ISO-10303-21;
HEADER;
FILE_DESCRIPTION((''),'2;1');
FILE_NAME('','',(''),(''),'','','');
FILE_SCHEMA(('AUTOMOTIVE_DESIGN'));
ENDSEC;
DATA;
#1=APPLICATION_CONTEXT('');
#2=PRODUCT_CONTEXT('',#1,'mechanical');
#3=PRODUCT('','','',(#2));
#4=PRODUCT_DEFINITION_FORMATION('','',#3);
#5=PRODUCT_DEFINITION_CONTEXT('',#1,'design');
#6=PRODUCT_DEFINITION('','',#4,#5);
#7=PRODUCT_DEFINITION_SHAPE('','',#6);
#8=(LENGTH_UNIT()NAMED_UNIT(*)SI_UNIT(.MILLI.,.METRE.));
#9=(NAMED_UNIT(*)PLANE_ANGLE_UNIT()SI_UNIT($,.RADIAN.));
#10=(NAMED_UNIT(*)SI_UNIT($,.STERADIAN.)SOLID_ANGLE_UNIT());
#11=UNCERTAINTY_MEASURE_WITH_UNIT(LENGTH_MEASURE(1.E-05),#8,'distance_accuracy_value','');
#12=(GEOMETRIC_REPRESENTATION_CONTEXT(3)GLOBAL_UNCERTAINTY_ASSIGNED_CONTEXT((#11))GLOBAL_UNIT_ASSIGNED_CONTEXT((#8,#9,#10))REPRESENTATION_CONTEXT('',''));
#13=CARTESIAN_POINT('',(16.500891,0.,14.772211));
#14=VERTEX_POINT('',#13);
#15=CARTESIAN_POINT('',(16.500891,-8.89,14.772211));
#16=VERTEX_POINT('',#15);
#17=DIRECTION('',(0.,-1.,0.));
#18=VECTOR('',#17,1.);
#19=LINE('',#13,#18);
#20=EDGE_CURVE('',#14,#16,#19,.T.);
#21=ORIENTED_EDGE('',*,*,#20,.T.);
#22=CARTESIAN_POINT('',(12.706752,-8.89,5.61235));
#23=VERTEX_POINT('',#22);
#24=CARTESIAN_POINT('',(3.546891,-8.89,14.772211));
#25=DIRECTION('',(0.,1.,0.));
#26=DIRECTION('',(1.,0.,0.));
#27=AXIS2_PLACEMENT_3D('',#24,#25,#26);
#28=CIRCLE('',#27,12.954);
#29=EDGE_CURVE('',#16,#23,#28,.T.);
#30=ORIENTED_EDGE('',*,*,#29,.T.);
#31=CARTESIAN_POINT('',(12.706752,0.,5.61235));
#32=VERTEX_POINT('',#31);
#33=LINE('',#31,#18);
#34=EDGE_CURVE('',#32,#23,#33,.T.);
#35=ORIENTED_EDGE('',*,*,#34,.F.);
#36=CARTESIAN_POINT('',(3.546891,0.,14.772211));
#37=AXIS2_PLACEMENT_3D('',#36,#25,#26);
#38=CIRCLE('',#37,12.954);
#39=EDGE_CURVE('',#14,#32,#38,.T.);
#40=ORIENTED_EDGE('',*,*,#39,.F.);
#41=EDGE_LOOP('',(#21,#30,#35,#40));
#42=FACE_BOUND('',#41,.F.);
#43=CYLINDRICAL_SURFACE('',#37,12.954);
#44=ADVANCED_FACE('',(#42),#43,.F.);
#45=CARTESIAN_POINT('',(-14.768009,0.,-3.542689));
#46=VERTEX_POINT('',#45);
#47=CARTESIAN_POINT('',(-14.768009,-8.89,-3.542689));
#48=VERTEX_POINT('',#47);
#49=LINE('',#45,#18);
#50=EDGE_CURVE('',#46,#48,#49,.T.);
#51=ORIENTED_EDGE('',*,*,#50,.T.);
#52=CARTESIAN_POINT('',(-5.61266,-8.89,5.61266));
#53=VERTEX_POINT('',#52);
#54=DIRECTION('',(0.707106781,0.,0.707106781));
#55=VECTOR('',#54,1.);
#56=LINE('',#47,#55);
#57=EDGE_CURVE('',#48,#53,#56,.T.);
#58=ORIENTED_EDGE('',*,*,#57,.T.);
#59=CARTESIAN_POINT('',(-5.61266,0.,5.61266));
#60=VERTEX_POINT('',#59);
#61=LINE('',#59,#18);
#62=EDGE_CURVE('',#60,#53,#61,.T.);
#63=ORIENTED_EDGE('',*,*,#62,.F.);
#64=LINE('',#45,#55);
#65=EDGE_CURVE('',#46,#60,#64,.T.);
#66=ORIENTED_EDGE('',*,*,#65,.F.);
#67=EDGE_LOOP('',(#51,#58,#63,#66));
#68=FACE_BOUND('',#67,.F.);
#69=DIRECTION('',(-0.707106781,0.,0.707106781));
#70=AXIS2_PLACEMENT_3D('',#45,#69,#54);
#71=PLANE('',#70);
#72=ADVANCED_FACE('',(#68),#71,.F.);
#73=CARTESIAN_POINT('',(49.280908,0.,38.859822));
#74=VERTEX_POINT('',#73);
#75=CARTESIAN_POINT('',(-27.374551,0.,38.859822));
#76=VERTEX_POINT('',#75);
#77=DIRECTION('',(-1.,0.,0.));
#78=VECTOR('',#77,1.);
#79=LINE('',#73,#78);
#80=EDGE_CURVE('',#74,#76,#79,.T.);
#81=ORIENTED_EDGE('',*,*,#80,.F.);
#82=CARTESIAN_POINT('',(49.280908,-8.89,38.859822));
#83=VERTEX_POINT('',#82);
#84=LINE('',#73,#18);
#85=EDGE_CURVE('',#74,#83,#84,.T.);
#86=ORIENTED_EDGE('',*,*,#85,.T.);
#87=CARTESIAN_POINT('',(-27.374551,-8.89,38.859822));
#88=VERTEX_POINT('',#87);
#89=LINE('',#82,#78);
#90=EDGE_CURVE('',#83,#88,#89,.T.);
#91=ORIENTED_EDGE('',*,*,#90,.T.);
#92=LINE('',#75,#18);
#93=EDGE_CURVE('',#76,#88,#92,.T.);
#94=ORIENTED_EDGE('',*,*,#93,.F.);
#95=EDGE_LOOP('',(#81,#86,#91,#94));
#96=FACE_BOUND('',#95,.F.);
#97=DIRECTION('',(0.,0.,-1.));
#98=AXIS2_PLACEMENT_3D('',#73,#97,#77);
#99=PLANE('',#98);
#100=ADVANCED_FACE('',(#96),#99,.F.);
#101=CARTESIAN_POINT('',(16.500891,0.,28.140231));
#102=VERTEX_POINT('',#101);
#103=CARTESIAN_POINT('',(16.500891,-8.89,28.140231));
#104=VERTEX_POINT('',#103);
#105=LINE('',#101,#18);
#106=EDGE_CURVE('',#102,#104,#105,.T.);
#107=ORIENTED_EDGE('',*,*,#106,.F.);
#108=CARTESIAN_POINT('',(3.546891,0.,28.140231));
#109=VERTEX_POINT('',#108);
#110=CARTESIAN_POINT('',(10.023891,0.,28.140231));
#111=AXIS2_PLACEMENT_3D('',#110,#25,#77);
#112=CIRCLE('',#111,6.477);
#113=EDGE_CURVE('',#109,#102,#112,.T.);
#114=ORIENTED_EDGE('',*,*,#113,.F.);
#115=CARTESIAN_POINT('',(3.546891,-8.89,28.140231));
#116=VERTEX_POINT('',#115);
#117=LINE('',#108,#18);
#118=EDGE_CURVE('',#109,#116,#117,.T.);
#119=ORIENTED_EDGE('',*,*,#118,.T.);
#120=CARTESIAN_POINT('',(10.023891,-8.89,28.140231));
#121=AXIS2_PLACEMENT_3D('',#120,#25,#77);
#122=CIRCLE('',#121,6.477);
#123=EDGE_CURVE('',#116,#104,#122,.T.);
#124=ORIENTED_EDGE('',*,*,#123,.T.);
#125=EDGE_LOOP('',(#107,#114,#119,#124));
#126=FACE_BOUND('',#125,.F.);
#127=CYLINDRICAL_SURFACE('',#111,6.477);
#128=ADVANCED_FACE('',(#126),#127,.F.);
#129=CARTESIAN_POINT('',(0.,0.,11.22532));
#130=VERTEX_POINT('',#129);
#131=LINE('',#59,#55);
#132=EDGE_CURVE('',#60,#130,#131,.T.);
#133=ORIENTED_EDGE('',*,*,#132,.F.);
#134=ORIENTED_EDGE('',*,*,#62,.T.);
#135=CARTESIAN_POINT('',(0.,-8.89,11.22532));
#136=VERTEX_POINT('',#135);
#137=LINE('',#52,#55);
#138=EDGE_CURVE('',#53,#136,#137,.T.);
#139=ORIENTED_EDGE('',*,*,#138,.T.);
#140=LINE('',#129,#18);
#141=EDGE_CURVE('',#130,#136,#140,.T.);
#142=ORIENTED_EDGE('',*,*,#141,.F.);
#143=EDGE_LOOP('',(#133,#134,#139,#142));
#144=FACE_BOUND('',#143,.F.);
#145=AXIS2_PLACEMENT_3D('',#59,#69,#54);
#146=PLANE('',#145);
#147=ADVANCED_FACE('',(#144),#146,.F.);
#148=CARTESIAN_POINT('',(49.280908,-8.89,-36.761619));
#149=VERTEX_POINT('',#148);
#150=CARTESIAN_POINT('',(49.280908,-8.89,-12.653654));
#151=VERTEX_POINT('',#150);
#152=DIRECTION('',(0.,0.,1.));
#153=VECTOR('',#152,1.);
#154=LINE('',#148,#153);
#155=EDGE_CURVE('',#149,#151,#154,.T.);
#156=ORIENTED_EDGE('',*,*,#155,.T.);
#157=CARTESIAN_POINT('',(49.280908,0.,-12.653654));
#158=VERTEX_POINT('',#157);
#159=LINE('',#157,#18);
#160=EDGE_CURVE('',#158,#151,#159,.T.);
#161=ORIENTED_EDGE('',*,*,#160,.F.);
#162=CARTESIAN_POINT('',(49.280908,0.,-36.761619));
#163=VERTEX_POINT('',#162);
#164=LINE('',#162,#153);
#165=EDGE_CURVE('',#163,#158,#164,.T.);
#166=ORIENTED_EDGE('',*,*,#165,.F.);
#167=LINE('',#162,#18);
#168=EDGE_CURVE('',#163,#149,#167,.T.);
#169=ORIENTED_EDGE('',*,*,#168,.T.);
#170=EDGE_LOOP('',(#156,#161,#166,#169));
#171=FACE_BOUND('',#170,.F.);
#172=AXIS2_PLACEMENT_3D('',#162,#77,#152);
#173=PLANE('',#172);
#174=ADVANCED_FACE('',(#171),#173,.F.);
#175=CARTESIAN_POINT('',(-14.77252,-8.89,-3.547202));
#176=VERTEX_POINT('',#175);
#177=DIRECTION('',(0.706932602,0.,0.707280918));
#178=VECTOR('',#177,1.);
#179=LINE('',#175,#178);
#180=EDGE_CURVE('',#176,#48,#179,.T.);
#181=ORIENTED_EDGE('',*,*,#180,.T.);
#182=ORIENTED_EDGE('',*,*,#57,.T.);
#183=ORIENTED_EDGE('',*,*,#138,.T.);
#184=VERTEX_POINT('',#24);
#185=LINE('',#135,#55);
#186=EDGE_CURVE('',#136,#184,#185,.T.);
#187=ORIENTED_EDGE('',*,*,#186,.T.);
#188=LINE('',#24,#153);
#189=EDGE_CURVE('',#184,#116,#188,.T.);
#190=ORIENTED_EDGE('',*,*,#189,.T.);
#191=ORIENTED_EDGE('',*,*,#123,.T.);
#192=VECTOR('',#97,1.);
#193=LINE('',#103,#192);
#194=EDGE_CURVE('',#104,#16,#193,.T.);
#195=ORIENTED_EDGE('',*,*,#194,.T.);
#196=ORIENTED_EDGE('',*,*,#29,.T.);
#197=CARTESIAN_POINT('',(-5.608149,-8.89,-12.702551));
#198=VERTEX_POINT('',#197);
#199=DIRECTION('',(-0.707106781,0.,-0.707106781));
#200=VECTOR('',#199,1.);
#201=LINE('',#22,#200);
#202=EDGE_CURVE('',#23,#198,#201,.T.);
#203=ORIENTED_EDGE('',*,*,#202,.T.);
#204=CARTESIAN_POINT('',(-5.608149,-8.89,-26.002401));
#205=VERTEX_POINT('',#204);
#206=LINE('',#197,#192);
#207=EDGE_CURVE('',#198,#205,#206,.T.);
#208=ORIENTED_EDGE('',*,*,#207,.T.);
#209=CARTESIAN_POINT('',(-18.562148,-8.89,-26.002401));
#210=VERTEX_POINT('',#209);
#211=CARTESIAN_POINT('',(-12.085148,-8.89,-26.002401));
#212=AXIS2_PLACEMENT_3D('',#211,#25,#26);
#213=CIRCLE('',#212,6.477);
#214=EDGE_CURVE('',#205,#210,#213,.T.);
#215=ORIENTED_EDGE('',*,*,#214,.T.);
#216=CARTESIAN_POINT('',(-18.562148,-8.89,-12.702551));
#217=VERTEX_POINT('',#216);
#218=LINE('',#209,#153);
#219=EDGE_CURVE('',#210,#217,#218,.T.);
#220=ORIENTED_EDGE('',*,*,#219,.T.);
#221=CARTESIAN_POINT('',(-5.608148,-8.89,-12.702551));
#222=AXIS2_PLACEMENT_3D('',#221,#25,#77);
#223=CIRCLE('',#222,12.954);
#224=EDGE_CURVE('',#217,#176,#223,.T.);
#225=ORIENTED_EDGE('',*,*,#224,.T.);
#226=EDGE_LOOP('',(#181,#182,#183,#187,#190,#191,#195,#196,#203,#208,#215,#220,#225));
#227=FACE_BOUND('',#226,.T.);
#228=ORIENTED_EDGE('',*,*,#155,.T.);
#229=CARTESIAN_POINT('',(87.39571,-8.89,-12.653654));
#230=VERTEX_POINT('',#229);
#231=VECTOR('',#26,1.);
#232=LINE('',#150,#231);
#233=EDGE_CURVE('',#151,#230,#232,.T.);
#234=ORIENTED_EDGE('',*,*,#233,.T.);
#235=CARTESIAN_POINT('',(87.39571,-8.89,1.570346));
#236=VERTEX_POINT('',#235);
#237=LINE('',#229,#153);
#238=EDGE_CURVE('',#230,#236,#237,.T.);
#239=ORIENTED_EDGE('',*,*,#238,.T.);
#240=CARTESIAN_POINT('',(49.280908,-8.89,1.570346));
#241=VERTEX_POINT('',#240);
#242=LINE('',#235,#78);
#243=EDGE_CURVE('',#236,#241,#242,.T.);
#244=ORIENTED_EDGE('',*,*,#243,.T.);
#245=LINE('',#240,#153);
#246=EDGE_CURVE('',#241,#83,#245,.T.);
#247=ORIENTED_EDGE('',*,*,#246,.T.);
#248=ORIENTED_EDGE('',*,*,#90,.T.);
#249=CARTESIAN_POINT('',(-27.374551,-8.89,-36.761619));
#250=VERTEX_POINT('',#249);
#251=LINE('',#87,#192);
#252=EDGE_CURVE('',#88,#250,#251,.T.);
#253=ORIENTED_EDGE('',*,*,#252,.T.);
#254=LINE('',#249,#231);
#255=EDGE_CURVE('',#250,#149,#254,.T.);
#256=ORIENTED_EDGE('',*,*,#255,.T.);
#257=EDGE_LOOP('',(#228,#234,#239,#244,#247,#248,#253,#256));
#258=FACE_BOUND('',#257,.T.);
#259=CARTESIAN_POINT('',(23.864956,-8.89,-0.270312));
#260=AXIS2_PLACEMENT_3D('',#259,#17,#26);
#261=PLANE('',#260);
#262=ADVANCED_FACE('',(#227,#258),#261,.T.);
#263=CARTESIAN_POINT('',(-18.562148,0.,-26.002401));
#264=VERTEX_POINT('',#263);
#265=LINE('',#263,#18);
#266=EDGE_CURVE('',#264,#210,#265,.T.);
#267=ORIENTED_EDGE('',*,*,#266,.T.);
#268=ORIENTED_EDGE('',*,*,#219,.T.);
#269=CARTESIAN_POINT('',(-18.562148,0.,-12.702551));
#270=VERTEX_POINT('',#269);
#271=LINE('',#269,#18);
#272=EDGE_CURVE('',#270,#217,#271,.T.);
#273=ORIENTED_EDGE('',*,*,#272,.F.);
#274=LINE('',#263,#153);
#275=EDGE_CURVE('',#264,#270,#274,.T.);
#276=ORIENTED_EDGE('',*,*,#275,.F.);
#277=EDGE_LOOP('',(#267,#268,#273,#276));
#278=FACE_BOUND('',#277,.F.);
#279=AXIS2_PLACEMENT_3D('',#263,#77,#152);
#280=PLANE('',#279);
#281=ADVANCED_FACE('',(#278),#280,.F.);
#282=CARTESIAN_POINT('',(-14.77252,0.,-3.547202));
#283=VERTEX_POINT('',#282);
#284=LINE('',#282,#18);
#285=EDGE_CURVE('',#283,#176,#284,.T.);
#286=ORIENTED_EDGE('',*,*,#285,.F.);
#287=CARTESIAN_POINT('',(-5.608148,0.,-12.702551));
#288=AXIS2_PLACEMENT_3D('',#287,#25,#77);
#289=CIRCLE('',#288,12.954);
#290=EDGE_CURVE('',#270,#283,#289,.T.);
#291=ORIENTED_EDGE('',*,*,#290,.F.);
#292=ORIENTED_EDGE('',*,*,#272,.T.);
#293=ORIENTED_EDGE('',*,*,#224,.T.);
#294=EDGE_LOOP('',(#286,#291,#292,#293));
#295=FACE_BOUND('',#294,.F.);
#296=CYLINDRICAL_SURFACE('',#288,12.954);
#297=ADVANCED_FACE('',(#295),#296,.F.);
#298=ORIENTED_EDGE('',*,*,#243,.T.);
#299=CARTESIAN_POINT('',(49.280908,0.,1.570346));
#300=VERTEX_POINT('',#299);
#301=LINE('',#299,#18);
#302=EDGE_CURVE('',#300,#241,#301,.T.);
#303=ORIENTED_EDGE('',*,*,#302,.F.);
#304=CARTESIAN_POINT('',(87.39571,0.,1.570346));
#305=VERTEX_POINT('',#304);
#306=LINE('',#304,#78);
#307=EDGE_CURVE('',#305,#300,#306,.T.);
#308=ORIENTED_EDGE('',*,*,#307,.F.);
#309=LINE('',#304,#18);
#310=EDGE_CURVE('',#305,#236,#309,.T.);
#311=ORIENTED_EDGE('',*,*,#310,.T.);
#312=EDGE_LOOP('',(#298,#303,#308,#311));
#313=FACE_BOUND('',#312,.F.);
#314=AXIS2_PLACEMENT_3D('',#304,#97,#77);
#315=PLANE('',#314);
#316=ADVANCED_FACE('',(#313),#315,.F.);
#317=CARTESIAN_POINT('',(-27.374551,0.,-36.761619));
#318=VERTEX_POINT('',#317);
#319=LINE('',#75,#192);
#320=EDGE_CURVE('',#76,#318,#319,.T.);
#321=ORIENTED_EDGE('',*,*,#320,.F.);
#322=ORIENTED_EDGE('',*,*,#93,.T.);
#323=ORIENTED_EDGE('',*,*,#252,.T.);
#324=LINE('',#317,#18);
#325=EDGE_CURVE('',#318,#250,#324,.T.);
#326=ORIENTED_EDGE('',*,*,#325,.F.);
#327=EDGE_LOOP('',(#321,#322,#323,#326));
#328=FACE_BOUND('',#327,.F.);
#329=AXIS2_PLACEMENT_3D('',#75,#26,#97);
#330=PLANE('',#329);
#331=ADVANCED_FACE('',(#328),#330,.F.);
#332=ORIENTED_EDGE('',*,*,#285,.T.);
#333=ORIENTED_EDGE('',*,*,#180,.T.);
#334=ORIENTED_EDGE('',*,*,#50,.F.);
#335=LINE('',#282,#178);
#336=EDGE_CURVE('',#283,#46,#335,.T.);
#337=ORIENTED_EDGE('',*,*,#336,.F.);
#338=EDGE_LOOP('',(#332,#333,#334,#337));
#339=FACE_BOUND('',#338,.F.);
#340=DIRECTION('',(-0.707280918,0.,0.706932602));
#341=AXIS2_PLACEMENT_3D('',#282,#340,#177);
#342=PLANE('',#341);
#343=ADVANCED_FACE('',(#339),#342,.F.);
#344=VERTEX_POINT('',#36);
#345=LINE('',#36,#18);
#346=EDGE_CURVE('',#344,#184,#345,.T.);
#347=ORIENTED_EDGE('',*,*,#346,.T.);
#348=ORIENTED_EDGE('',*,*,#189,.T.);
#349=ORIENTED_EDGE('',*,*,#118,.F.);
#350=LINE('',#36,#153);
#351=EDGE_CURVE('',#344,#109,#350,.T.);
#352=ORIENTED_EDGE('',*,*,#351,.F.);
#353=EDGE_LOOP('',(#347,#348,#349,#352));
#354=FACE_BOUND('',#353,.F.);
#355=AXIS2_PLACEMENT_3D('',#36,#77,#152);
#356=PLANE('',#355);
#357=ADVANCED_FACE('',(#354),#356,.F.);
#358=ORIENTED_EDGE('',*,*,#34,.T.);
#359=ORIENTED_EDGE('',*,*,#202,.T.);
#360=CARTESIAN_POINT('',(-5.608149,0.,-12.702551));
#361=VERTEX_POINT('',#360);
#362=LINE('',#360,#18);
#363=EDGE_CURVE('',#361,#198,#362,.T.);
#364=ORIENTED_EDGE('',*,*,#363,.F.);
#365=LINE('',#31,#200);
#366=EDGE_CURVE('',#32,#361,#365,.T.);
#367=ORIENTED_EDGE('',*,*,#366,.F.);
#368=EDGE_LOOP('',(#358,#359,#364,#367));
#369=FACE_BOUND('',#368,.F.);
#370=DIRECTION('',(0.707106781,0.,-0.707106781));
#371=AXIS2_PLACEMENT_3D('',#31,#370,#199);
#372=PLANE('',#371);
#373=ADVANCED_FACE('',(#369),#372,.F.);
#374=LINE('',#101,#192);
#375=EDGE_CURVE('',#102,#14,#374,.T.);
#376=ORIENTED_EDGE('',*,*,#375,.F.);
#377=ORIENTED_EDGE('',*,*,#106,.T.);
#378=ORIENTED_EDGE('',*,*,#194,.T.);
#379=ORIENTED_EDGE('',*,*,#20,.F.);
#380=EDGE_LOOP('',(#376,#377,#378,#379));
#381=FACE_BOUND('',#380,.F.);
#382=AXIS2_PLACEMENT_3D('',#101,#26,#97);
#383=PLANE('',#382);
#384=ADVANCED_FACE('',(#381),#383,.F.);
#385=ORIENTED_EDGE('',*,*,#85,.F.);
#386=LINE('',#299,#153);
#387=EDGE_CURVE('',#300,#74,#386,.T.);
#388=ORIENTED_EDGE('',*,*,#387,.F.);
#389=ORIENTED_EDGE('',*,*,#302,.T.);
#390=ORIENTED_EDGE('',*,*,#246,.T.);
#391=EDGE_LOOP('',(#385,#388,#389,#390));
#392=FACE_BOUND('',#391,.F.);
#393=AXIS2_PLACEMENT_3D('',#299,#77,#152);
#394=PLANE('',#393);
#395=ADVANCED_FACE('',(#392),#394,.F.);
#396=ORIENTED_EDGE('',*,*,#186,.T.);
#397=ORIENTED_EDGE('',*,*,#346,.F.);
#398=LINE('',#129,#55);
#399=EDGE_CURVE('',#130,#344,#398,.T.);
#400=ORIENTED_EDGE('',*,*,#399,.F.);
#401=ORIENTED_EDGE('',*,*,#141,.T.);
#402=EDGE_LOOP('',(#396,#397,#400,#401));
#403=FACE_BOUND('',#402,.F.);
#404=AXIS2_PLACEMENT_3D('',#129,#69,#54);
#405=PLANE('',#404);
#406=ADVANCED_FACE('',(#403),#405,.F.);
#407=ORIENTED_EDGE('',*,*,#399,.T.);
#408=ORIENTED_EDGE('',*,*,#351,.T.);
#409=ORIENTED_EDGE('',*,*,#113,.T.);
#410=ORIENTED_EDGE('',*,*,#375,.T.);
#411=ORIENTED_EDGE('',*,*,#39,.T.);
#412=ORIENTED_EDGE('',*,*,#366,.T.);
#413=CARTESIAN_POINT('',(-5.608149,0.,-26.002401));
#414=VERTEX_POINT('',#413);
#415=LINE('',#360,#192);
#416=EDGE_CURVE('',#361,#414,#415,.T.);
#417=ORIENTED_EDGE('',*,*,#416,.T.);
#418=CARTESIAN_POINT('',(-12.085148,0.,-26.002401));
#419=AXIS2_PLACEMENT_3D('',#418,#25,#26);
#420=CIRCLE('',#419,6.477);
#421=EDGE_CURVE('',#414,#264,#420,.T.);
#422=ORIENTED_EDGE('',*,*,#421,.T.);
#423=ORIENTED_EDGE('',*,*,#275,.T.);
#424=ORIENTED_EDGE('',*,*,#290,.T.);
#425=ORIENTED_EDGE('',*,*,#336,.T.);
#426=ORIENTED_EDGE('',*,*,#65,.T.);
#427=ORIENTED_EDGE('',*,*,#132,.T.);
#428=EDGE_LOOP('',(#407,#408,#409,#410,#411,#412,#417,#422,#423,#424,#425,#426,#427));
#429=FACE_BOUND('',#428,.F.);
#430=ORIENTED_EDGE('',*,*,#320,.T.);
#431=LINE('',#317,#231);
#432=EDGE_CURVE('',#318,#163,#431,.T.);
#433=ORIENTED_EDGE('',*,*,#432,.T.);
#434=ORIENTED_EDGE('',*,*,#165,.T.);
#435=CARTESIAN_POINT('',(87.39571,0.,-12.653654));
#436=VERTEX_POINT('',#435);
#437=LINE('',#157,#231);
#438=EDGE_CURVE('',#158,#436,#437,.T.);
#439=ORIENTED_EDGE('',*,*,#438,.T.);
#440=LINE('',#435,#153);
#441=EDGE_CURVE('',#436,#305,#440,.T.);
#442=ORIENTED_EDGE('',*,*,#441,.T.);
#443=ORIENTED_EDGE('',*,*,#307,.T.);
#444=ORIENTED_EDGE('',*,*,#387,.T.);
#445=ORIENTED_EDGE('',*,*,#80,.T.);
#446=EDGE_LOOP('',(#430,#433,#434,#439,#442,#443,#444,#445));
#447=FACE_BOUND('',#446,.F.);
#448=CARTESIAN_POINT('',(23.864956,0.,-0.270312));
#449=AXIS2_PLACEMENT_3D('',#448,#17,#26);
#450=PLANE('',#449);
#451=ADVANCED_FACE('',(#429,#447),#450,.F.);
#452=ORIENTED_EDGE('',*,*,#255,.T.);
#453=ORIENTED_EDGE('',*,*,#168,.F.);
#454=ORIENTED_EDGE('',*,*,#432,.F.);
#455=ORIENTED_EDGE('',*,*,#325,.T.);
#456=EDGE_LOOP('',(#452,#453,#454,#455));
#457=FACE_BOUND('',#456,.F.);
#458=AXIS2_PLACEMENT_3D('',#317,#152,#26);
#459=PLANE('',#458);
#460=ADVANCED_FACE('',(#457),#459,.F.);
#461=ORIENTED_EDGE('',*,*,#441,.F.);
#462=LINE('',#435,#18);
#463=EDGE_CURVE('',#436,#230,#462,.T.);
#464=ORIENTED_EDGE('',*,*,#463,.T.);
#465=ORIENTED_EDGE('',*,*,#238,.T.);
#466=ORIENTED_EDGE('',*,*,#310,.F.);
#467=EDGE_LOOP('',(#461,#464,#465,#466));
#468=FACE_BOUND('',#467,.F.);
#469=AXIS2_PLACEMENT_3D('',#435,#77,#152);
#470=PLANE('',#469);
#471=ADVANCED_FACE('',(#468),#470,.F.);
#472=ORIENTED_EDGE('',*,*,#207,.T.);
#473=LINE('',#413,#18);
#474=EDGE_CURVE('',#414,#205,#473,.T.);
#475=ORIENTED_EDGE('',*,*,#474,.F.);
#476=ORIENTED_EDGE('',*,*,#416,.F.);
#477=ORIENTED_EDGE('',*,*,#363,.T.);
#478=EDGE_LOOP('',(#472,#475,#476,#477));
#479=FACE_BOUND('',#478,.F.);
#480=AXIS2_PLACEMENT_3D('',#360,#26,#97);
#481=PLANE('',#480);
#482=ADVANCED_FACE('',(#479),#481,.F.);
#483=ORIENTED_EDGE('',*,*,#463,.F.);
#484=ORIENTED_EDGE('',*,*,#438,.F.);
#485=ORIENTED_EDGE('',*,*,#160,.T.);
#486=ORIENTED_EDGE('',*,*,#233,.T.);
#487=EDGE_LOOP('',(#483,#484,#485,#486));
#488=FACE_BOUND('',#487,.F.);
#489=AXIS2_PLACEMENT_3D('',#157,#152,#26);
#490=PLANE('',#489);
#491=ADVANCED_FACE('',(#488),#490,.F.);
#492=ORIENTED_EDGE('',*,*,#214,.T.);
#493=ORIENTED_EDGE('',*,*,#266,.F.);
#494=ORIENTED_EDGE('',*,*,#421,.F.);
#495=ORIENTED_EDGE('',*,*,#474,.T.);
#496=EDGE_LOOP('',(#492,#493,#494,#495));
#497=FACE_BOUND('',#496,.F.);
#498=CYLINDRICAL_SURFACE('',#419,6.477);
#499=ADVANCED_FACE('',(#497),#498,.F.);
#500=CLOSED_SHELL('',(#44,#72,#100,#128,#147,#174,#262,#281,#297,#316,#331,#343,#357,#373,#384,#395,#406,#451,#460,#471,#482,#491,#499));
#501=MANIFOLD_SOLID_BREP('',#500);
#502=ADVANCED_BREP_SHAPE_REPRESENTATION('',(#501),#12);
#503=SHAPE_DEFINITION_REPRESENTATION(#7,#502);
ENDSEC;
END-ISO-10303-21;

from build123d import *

# Parameters (mm, degrees)
F1_DEPTH = 8.89


# Not quite as in the source:
# - ends of sketch curves that miss each other by under 0.0002 mm in the source are joined


with BuildPart() as f1:
    # F0 (on Front) → F1 (new body)
    with BuildSketch(Plane.XZ):
        Polygon((49.2809079587, 38.859821856), (0, 38.859821856), (-27.3745507002, 38.859821856), (-27.3745507002, 1.9207646612), (-27.3745507002, -36.7616191506), (49.2809079587, -36.7616191506), (49.2809079587, -12.6536535591), (87.395709982, -12.6536535591), (87.395709982, -5.5416535591), (87.395709982, 1.5703464409), (49.2809079587, 1.5703464409), align=None)
        with BuildLine():
            Line((-5.6126600757, 5.6126600757), (0, 11.2253201513))
            Line((0, 11.2253201513), (3.5468912197, 14.7722113711))
            Line((3.5468912197, 14.7722113711), (3.5468912197, 28.1402313711))
            ThreePointArc((3.5468912197, 28.1402313711), (10.0238912197, 34.6172313711), (16.5008912197, 28.1402313711))
            Line((16.5008912197, 28.1402313711), (16.5008912197, 14.7722113711))
            ThreePointArc((16.5008912197, 14.7722113711), (15.5148266839, 9.8149301882), (12.7067524632, 5.6123501276))
            Line((12.7067524632, 5.6123501276), (3.5517127264, -3.5426896092))
            Line((3.5517127264, -3.5426896092), (-5.6081485171, -12.7025508527))
            Line((-5.6081485171, -12.7025508527), (-5.6081485171, -26.002401486))
            ThreePointArc((-5.6081485171, -26.002401486), (-12.085148378, -32.479401347), (-18.562148239, -26.002401486))
            Line((-18.562148239, -26.002401486), (-18.562148239, -12.7025505746))
            ThreePointArc((-18.562148239, -12.7025505746), (-17.5773042343, -7.7482170412), (-14.7725202074, -3.5472022785))
            Line((-14.7725202074, -3.5472022785), (-14.7680094825, -3.5426893311))
            Line((-14.7680094825, -3.5426893311), (-5.6129700238, 5.6123501276))
            Line((-5.6129700238, 5.6123501276), (-5.6126600757, 5.6126600757))
        make_face(mode=Mode.SUBTRACT)
    extrude(amount=F1_DEPTH)


solid = f1.part
